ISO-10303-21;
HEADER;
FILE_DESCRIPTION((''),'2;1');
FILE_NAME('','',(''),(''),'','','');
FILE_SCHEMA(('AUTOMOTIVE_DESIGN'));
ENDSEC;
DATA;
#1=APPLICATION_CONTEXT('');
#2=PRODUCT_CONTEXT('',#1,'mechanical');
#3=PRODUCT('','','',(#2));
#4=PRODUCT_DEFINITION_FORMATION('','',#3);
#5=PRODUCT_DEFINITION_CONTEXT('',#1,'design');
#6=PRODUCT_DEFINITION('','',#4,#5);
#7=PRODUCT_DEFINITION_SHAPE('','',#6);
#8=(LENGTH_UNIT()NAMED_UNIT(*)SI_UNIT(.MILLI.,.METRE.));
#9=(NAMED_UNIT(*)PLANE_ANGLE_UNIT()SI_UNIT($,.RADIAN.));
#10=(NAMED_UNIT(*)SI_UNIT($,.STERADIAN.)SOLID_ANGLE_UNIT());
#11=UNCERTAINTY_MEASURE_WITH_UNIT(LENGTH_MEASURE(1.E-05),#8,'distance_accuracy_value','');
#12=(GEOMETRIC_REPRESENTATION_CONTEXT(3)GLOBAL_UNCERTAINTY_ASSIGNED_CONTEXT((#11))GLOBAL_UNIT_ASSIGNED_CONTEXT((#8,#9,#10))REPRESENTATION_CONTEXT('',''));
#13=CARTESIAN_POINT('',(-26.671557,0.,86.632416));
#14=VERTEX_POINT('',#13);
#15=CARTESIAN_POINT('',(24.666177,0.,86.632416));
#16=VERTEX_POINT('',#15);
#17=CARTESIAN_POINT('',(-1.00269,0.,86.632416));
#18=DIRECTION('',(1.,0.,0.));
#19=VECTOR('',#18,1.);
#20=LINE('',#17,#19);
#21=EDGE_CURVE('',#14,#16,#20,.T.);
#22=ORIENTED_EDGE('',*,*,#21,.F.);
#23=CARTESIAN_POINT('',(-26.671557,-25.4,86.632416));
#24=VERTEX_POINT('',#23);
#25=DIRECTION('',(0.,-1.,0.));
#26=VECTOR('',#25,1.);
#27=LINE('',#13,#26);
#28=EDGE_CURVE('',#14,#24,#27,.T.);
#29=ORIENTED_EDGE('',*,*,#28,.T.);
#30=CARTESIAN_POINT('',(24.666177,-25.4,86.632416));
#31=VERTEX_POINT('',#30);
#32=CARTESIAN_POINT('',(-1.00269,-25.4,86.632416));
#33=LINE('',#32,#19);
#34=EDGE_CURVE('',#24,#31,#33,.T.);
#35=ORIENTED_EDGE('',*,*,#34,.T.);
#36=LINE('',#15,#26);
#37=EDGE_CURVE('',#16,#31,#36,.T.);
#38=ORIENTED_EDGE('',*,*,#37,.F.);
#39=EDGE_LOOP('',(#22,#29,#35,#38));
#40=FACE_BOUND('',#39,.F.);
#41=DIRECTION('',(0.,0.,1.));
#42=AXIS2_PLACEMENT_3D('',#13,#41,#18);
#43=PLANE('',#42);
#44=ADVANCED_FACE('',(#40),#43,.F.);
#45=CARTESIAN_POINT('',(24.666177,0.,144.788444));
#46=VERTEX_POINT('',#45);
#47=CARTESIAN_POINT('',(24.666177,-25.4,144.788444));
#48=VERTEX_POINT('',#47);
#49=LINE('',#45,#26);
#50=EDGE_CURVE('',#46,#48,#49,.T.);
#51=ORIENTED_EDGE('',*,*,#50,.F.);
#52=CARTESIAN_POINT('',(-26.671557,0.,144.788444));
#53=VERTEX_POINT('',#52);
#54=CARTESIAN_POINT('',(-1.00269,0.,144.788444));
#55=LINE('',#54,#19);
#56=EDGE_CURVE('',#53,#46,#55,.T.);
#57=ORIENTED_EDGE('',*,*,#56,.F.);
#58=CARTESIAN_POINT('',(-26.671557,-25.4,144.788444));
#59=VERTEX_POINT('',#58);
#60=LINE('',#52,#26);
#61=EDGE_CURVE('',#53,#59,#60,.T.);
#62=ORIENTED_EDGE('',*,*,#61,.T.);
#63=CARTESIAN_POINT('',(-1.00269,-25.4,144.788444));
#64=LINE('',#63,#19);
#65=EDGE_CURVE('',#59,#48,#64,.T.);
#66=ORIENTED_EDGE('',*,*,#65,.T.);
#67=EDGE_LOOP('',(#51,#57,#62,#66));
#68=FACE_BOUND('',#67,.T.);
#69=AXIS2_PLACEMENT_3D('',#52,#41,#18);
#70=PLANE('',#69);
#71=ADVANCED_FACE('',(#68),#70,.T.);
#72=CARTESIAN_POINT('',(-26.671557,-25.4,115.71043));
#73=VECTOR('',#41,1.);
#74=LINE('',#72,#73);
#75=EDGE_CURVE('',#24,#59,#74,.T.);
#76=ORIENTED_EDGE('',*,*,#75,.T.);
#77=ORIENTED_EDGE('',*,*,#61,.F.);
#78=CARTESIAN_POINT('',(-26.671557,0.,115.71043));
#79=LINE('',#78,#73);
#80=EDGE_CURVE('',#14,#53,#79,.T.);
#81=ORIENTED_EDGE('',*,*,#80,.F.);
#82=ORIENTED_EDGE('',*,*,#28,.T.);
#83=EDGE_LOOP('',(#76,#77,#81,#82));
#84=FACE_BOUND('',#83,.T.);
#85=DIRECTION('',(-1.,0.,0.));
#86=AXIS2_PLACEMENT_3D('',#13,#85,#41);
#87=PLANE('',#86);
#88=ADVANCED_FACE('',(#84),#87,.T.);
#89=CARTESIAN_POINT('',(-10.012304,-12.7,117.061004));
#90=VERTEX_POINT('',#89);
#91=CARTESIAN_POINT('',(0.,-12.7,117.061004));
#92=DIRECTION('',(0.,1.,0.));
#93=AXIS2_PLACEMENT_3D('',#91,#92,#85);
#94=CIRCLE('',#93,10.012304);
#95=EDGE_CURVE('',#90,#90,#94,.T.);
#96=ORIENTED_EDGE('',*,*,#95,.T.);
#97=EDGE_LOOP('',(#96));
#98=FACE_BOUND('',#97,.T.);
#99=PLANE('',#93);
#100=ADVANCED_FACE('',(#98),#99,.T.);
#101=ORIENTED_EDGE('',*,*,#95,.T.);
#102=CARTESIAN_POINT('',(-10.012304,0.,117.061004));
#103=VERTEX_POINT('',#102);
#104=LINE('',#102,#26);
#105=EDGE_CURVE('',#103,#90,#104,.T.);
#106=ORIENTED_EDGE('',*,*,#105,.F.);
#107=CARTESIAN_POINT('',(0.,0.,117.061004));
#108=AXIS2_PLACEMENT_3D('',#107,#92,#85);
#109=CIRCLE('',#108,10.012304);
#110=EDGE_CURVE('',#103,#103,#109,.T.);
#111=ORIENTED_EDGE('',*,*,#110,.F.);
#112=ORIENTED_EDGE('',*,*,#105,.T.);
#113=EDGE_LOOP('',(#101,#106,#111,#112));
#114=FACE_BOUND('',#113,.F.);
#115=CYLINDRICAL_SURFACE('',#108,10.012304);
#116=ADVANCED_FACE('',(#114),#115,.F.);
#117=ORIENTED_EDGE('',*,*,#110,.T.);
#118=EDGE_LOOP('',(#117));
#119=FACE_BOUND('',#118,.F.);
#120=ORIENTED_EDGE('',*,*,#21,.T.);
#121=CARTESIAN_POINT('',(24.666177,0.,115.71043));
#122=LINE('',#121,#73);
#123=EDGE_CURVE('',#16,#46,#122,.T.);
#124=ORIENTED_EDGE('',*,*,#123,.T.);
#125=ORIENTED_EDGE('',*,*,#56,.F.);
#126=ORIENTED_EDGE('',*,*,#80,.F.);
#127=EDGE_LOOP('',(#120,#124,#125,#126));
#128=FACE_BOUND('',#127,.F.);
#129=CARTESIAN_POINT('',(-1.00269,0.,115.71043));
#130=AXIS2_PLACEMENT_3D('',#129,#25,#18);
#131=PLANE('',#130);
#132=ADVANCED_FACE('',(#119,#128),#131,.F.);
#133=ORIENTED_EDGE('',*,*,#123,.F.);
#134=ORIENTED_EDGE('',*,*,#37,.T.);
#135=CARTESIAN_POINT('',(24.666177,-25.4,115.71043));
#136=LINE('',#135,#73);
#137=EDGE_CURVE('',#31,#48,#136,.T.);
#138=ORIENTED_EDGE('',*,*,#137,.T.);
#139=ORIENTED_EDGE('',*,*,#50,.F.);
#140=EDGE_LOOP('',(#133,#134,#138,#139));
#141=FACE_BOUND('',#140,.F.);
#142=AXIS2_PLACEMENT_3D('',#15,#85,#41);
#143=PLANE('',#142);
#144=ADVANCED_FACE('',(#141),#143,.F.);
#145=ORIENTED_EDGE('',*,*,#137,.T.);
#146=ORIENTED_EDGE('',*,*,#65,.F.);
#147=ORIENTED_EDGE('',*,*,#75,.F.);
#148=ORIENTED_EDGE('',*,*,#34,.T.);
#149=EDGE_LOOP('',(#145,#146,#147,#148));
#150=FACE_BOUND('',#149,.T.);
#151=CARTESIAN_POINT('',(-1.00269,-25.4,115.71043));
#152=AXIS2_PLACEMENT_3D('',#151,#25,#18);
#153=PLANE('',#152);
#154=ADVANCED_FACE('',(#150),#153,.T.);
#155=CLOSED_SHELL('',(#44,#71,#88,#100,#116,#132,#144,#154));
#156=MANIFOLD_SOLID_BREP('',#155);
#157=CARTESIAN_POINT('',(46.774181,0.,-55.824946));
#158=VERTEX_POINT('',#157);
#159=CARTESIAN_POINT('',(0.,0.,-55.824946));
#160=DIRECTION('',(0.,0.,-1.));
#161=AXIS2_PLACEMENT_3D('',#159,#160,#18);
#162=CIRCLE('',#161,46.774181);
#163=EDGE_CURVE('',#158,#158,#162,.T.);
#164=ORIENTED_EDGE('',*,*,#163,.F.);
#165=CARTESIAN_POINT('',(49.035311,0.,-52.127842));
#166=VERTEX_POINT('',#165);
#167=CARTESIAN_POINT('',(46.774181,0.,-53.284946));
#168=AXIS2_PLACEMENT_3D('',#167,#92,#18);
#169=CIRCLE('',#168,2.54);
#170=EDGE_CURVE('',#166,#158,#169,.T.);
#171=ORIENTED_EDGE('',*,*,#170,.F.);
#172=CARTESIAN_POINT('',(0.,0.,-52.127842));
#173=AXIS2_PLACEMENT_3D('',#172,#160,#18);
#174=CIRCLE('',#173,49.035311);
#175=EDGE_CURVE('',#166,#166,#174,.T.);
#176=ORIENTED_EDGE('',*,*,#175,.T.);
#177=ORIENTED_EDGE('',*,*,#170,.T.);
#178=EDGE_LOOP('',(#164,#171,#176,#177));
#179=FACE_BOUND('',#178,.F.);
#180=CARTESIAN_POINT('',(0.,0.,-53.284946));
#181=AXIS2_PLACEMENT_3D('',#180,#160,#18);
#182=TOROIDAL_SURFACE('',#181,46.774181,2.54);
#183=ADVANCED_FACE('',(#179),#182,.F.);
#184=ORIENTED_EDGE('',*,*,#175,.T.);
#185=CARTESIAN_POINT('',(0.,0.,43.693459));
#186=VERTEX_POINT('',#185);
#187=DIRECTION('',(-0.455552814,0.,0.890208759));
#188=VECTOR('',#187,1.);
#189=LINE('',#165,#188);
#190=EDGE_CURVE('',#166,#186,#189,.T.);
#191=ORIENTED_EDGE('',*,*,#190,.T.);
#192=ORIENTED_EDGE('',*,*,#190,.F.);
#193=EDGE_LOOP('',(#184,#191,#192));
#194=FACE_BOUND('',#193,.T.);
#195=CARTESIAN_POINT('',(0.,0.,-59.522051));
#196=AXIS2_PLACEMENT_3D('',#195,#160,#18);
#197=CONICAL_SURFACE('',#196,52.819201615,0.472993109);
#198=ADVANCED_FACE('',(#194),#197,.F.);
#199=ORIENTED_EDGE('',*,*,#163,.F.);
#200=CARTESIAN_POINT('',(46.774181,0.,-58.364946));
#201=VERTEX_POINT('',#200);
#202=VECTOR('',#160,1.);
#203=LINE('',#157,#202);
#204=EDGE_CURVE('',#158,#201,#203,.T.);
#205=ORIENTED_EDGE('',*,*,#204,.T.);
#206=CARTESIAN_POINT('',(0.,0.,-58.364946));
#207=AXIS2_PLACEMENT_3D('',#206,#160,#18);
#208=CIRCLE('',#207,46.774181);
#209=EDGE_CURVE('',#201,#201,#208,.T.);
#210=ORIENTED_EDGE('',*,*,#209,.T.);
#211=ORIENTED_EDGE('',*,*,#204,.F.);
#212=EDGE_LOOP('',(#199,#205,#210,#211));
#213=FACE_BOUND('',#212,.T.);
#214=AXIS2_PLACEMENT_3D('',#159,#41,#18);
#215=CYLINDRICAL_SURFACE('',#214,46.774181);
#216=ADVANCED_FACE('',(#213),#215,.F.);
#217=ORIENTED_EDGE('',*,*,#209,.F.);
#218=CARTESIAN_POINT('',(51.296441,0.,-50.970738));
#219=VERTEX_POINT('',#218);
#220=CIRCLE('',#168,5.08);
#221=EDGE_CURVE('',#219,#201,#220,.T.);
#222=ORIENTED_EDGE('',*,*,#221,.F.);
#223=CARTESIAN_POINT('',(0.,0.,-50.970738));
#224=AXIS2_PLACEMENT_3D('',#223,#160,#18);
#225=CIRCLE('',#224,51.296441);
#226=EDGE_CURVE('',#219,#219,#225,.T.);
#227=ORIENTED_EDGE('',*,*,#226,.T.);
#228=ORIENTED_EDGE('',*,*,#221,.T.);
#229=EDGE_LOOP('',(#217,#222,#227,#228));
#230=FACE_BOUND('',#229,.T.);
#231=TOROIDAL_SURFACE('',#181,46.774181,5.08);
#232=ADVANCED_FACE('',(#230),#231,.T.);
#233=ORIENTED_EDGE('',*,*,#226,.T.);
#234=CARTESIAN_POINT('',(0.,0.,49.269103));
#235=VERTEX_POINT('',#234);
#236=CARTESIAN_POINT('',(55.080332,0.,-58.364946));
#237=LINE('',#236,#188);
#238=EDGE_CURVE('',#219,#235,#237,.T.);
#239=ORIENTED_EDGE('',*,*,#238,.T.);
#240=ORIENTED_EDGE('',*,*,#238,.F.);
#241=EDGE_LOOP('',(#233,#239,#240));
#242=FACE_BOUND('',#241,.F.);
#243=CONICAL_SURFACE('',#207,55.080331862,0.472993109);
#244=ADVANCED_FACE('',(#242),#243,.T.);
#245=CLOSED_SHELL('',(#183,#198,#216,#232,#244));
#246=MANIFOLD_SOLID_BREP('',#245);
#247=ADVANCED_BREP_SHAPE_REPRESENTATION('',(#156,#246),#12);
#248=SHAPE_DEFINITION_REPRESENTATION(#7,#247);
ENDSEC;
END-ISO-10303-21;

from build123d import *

# Parameters (mm, degrees)
F2_W     = 51.3377338648
F2_H     = 58.1560283899
F3_DEPTH = 25.4
F5_R     = 10.0123039363
F6_DEPTH = 12.7
F7_R     = 5.08
F8_T     = -2.54


# Not quite as in the source:
# - a shell that OpenCascade refuses in one call is made with other operations: the cavity is built on its own and cut out


with BuildPart() as f1:
    # F0 (on Front) → F1 (revolve)
    with BuildSketch(Plane.XZ):
        Polygon((55.080331862, -58.3649463952), (0, 49.2691025138), (0, -58.3649463952), align=None)
    revolve(axis=Axis((0, 0, -4.5479219407), (0, 0, -1)))

    # F7
    f7_edges = [f1.edges().sort_by_distance(p)[0] for p in [
        (-55.080332, 0, -58.364946),
    ]]
    fillet(f7_edges, radius=F7_R)

    # F8: a shell. OpenCascade refuses it in one call, so the cavity is built on its own and cut out:
    # the body offset inwards by the wall thickness, plus a prism from it out through each open face.
    f8_core = offset(f1.part, amount=F8_T, mode=Mode.PRIVATE)
    f8_exits = [f8_core.faces().sort_by_distance(p)[0] for p in [
        (0, 0, -55.824946),
    ]]
    add(f8_core, mode=Mode.SUBTRACT)
    extrude(f8_exits, amount=-F8_T, mode=Mode.SUBTRACT)


with BuildPart() as f3:
    # F2 (on Front) → F3 (new body)
    with BuildSketch(Plane.XZ):
        with Locations((-1.0026898235, 115.7104298472)):
            Rectangle(F2_W, F2_H)
    extrude(amount=F3_DEPTH)

    # F5 (on face) → F6 (cut)
    with BuildSketch(Plane(origin=(0, 0, 0), x_dir=(-1, 0, 0), z_dir=(0, 1, 0))):
        with Locations((0, 117.0610040426)):
            Circle(F5_R)
    extrude(amount=-F6_DEPTH, mode=Mode.SUBTRACT)


solid = Compound([f1.part, f3.part])
